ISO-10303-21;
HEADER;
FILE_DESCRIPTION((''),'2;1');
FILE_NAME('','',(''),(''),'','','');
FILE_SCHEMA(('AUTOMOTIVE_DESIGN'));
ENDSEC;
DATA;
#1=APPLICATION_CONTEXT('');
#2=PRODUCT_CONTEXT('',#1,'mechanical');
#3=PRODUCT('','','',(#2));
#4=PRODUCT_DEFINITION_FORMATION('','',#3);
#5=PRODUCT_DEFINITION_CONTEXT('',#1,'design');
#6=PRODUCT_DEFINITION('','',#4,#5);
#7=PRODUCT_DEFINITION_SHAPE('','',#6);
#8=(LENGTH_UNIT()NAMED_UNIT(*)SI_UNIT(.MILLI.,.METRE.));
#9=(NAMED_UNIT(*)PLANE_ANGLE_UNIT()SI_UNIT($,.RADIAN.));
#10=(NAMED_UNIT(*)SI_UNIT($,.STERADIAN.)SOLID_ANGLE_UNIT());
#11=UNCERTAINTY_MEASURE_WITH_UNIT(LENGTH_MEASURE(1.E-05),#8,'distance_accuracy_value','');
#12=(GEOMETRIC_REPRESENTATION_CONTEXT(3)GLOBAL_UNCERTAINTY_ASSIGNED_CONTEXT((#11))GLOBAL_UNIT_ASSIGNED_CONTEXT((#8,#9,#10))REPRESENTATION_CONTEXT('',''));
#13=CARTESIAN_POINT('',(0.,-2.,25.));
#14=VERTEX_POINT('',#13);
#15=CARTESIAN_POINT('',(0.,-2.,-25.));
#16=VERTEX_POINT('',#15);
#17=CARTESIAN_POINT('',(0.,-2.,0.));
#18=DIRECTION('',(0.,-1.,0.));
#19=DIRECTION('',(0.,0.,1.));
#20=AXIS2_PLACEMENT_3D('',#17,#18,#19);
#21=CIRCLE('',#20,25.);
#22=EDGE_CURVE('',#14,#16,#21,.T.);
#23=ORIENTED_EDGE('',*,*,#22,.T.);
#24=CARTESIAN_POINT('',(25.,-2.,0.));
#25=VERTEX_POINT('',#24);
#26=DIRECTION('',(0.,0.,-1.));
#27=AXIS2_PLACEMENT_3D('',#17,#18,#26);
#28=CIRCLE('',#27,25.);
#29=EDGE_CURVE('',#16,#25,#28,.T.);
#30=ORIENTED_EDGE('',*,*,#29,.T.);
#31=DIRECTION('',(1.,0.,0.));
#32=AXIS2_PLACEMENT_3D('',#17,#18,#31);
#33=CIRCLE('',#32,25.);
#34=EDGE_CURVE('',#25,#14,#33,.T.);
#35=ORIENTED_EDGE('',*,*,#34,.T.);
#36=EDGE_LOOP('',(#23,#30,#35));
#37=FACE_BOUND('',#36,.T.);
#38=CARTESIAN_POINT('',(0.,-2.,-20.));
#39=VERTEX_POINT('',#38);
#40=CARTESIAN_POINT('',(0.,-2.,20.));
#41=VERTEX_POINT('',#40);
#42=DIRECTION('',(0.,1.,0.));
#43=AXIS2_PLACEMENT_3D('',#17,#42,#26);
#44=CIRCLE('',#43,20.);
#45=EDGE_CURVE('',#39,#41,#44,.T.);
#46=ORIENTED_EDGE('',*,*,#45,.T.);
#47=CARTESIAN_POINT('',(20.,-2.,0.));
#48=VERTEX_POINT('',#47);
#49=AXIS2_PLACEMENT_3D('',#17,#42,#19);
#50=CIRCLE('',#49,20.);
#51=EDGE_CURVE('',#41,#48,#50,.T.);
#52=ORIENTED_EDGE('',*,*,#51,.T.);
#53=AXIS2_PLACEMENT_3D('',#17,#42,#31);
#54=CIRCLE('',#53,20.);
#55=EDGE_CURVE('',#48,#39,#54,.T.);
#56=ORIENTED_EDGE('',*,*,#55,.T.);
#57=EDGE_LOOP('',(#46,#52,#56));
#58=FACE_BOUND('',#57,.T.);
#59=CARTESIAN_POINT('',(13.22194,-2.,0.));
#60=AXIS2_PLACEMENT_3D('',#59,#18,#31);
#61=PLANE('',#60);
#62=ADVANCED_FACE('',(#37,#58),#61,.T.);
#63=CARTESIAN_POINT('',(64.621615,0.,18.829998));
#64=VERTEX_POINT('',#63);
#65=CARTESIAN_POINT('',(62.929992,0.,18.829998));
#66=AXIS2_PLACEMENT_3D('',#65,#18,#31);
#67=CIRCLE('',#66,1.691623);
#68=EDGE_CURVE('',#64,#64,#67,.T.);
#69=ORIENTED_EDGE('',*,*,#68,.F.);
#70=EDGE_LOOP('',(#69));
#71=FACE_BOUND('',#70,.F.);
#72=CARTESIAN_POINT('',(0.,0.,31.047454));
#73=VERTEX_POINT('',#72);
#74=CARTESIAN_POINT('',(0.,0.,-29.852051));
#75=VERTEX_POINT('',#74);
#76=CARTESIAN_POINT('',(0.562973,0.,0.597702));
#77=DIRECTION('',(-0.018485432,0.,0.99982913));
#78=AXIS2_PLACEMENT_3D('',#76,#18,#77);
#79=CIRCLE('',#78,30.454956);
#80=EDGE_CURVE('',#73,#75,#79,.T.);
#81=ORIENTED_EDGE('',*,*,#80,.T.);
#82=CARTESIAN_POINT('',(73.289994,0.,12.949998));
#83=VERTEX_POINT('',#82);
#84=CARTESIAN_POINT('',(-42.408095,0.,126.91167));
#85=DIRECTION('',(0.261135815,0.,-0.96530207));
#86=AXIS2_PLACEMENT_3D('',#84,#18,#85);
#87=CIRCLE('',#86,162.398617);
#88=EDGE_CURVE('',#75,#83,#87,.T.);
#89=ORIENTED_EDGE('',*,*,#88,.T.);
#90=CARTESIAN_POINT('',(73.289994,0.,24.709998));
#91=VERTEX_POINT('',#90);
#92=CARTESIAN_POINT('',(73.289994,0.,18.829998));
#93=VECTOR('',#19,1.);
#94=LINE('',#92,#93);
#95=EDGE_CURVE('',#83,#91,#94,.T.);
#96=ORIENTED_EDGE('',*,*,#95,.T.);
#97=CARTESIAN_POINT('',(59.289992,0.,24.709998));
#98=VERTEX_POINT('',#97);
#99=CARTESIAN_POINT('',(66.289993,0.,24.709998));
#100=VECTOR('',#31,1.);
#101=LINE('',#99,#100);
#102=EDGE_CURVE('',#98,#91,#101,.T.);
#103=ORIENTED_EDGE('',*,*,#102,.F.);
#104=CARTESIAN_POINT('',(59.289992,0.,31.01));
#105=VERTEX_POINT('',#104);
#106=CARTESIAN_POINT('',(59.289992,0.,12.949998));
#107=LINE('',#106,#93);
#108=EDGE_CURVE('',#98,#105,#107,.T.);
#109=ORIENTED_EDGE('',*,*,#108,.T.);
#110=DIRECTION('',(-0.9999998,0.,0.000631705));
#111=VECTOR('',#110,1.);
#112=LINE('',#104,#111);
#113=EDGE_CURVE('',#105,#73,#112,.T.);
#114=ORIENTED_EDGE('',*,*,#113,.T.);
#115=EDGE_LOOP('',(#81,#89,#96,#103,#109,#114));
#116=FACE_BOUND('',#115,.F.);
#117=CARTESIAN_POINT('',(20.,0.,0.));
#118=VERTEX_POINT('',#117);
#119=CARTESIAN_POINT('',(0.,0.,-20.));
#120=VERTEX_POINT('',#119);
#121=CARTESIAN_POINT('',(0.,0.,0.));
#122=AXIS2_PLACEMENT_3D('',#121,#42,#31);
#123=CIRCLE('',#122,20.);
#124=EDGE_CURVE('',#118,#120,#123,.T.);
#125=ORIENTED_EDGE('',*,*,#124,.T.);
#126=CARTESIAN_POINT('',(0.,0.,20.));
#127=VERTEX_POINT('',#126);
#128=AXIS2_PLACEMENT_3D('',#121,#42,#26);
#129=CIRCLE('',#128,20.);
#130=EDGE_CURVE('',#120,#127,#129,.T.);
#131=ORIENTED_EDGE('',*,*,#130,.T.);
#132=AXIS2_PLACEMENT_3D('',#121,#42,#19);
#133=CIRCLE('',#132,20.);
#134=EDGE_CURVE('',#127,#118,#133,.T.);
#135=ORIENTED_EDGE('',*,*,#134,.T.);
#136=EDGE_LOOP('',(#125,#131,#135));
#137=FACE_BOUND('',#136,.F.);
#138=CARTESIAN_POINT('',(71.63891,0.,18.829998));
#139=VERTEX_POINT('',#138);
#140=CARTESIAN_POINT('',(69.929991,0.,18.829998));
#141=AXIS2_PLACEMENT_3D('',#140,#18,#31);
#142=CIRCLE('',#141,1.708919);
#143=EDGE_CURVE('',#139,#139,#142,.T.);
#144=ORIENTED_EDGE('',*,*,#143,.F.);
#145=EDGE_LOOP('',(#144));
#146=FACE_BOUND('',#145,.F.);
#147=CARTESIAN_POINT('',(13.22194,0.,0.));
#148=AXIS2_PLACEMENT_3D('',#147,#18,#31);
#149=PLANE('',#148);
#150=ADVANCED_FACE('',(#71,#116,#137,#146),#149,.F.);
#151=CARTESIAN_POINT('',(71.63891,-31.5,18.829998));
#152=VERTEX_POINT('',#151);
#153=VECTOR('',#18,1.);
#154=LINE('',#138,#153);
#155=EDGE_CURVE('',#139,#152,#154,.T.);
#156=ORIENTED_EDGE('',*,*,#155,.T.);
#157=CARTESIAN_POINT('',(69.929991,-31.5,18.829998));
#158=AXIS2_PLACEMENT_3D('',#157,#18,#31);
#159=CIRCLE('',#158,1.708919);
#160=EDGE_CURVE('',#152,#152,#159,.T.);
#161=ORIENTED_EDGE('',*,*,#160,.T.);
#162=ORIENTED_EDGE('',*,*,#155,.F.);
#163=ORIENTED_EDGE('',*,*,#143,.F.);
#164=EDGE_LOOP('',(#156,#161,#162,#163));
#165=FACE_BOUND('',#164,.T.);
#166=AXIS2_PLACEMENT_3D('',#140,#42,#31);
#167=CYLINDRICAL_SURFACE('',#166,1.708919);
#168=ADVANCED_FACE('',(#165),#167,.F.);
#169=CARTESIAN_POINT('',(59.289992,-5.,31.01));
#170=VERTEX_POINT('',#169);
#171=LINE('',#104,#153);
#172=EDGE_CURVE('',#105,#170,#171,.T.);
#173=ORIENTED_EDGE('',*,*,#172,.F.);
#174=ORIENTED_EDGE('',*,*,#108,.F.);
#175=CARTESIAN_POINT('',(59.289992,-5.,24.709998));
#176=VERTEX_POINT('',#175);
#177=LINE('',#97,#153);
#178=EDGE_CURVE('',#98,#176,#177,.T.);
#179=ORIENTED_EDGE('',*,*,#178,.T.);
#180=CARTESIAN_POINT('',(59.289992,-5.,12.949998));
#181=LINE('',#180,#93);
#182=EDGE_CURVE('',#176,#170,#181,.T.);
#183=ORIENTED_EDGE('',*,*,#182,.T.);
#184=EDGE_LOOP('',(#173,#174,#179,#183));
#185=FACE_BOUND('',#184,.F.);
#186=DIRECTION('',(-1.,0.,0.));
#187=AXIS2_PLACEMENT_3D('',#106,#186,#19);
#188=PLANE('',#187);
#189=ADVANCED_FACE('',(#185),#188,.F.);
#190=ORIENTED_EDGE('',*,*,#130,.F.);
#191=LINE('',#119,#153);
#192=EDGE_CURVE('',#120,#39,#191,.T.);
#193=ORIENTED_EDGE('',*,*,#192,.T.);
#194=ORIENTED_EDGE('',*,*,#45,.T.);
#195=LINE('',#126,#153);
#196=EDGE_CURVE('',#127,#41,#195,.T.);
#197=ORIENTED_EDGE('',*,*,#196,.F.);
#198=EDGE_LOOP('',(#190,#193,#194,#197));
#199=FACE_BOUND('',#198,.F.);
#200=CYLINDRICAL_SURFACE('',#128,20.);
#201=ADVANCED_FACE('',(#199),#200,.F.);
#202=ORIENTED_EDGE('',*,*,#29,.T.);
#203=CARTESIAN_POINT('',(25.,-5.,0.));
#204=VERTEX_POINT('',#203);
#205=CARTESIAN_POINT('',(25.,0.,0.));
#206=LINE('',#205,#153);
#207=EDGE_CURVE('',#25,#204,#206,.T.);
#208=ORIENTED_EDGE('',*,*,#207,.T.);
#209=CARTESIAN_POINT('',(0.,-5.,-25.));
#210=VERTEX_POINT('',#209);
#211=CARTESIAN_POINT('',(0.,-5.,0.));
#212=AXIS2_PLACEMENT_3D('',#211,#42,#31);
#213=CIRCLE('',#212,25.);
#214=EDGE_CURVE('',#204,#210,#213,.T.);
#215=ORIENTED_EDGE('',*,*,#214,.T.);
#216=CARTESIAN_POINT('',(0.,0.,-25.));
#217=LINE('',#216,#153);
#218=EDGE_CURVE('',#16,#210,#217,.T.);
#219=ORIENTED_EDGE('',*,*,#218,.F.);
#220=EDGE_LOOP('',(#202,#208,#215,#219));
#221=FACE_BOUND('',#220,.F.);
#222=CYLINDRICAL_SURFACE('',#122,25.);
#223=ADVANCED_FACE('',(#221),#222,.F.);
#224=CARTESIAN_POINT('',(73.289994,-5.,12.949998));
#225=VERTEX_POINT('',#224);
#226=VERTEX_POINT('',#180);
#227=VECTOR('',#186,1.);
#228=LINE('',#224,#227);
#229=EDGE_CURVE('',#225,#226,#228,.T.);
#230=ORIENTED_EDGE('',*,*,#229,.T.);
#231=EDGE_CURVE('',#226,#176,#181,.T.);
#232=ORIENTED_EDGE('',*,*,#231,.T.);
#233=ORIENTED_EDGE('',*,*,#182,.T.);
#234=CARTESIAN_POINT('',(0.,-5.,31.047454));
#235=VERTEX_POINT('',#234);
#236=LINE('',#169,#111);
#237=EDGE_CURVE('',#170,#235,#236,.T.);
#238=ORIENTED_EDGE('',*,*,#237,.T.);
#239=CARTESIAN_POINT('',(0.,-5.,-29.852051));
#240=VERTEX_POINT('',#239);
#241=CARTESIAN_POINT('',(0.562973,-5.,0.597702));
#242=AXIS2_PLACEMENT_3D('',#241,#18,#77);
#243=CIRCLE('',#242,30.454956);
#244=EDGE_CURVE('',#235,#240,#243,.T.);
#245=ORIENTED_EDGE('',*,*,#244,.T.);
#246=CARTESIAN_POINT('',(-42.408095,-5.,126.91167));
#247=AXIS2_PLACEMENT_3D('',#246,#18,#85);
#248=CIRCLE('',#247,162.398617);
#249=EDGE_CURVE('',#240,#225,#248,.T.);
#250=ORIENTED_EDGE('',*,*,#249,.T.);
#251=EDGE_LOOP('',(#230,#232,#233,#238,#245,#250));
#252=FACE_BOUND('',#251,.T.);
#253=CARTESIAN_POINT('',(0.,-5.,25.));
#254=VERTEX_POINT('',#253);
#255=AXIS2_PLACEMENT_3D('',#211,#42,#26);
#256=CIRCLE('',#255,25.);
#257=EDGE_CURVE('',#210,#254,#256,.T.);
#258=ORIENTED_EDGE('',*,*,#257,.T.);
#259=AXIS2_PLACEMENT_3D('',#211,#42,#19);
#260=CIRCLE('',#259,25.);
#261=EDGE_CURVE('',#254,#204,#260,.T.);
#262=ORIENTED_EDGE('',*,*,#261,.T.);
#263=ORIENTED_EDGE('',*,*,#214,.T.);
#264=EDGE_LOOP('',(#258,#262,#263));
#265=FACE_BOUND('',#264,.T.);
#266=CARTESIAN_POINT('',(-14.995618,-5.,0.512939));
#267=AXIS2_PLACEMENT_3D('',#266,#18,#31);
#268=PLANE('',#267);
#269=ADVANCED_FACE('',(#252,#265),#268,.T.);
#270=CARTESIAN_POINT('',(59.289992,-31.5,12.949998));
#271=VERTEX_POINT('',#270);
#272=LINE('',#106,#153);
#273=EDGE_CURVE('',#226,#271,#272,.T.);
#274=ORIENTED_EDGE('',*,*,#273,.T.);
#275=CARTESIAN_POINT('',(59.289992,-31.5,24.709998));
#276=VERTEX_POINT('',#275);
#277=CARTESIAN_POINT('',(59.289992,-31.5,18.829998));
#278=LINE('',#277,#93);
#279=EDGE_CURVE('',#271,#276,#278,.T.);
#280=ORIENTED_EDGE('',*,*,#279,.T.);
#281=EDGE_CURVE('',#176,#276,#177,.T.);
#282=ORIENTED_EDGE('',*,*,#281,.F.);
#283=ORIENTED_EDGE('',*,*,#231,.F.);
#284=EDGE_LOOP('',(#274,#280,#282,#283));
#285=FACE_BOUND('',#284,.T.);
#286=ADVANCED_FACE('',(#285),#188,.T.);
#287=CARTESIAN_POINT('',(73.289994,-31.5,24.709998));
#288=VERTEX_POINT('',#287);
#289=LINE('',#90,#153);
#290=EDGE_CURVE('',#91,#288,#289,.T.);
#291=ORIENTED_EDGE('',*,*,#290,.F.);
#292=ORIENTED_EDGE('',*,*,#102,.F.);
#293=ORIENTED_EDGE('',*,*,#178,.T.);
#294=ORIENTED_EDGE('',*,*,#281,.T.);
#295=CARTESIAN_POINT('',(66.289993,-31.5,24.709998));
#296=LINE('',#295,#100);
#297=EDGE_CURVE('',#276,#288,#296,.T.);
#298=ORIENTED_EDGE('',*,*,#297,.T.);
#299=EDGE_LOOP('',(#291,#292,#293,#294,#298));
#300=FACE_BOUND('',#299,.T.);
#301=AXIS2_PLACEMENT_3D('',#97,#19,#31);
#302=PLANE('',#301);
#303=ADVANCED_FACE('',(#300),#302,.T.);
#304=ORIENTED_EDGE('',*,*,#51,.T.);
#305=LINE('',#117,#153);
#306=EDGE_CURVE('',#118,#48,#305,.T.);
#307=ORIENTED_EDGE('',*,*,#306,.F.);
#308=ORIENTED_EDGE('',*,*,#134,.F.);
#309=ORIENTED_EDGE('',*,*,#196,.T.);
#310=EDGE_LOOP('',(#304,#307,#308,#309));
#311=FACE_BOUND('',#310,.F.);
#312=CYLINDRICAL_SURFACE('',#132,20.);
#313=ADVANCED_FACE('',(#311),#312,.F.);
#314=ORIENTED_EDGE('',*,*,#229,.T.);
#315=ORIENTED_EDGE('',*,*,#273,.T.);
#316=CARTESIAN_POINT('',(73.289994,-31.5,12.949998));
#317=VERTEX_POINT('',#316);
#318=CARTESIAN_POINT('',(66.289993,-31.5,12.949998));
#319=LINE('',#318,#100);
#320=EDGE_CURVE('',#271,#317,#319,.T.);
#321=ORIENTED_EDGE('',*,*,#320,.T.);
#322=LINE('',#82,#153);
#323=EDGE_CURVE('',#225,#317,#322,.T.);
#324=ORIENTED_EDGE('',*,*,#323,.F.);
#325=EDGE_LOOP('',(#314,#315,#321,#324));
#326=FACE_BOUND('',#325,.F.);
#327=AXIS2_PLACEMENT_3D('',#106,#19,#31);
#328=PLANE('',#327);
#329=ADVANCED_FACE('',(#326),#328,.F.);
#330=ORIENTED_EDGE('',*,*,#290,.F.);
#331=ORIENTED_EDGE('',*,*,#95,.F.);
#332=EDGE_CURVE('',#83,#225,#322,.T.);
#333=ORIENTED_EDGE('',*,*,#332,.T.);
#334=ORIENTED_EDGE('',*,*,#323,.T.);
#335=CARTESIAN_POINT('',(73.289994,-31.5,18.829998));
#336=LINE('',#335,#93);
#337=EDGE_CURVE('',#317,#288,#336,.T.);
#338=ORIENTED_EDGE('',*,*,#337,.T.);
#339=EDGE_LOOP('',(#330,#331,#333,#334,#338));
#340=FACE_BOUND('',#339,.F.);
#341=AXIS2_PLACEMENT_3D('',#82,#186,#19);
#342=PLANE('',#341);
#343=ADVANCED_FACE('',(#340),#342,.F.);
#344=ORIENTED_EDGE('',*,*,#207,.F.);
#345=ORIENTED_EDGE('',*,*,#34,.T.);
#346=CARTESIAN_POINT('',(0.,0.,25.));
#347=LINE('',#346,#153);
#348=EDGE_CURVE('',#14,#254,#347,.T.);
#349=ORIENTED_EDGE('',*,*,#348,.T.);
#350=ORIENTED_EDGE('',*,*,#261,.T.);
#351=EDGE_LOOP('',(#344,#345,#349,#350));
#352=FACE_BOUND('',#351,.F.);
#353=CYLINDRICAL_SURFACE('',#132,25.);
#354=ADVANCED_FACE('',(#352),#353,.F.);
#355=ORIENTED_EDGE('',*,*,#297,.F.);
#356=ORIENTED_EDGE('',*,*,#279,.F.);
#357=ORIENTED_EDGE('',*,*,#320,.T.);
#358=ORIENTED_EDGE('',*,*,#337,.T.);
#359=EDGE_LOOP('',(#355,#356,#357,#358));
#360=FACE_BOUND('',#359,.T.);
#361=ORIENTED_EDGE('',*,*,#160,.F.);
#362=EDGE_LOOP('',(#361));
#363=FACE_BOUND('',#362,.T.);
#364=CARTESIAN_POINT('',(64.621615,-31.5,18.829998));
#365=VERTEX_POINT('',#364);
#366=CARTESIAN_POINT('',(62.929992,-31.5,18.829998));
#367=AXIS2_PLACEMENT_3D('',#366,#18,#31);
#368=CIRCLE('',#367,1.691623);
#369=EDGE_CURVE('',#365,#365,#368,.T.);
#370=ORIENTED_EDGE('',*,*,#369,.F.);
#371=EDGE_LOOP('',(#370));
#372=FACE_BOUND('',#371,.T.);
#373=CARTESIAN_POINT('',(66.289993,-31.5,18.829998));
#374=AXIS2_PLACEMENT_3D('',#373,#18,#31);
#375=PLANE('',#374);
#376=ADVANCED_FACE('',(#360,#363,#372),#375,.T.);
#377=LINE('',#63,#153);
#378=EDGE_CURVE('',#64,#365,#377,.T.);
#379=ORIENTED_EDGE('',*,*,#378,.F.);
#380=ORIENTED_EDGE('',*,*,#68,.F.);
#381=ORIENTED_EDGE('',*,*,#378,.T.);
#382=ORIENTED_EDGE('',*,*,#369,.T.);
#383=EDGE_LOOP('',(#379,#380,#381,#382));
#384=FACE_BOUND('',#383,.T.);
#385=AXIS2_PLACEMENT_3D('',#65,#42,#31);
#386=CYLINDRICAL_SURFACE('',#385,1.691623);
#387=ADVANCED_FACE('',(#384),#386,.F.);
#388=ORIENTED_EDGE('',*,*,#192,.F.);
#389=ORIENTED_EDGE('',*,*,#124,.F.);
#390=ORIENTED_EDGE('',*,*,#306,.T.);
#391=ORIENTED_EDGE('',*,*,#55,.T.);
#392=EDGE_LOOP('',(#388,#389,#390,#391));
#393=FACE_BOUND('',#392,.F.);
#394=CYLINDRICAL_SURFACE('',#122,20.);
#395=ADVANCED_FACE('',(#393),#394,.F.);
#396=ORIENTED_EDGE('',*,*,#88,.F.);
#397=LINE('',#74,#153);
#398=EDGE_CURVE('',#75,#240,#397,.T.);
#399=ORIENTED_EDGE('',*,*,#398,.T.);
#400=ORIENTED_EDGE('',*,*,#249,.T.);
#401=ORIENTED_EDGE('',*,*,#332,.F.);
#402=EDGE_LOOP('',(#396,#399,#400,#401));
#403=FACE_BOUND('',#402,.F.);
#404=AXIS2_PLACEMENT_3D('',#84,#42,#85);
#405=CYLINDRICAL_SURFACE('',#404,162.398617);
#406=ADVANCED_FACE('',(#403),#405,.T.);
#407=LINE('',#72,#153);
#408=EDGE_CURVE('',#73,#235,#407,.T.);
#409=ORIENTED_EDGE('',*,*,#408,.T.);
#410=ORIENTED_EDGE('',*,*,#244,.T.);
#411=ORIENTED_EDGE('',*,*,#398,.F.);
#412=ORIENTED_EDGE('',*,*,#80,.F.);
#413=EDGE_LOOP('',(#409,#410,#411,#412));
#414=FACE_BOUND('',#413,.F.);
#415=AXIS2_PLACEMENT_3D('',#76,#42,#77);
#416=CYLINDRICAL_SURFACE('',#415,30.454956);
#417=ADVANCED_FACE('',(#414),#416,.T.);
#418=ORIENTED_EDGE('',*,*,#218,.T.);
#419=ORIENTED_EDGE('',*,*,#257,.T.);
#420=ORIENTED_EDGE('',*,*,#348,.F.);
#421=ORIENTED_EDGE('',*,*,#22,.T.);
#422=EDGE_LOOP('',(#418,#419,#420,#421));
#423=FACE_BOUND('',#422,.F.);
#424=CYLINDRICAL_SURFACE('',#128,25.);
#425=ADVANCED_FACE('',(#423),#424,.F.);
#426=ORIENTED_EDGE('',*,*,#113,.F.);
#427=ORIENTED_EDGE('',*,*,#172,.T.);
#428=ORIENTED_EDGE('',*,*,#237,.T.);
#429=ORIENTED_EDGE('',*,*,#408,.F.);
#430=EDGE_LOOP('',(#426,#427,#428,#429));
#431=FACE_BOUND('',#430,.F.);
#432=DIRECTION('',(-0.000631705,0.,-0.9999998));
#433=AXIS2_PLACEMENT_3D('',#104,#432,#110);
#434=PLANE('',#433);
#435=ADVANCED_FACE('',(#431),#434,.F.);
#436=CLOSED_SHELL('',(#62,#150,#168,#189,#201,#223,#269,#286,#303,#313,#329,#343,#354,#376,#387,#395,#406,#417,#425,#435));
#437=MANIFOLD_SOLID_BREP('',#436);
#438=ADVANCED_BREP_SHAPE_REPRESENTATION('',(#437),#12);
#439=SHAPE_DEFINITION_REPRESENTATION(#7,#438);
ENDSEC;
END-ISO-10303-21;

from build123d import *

# Parameters (mm, degrees)
F1_DEPTH = 5
F0_W     = 14.0000022948
F0_H     = 11.7600001395
F0_R     = 1.6916232852
F0_R_2   = 1.7089194305
F7_DEPTH = 31.5
F8_DEPTH = 2


# Not quite as in the source:
# - the program builds the solid bodies; features that only make, move or delete a surface that nothing else refers to are left out


with BuildPart() as f1:
    # F0 (on Front) → F1 (new body)
    with BuildSketch(Plane.XZ):
        with BuildLine():
            ThreePointArc((0, -25), (-25, 0), (0, 25))
            Line((0, 25), (0, 31.0474538393))
            ThreePointArc((0, 31.0474538393), (-29.8919830792, 0.5977015918), (0, -29.8520506557))
            Line((0, -29.8520506557), (0, -25))
        make_face()
        with BuildLine():
            ThreePointArc((0, 25), (17.6776695297, 17.6776695297), (25, 0))
            ThreePointArc((25, 0), (17.6776695297, -17.6776695297), (0, -25))
            Line((0, -25), (0, -29.8520506557))
            ThreePointArc((0, -29.8520506557), (39.4905936266, -13.3235446474), (73.2899941504, 12.9499975592))
            Line((73.2899941504, 12.9499975592), (59.2899918556, 12.9499975592))
            Line((59.2899918556, 12.9499975592), (59.2899918556, 24.7099976987))
            Line((59.2899918556, 24.7099976987), (59.2899918556, 31.0100000352))
            Line((59.2899918556, 31.0100000352), (0, 31.0474538393))
            Line((0, 31.0474538393), (0, 25))
        make_face()
    extrude(amount=F1_DEPTH)

    # F0 (on Front) → F7 (join)
    with BuildSketch(Plane.XZ):
        with Locations((66.289993003, 18.8299976289)):
            Rectangle(F0_W, F0_H)
        with Locations((62.9299916327, 18.8299976289)):
            Circle(F0_R, mode=Mode.SUBTRACT)
        with Locations((69.9299909174, 18.8299976289)):
            Circle(F0_R_2, mode=Mode.SUBTRACT)
    extrude(amount=F7_DEPTH)

    # F0 (on Front) → F8 (join)
    with BuildSketch(Plane.XZ):
        with BuildLine():
            ThreePointArc((0, -25), (17.6776695297, -17.6776695297), (25, 0))
            ThreePointArc((25, 0), (17.6776695297, 17.6776695297), (0, 25))
            Line((0, 25), (0, 20))
            ThreePointArc((0, 20), (14.1421356237, 14.1421356237), (20, 0))
            ThreePointArc((20, 0), (14.1421356237, -14.1421356237), (0, -20))
            Line((0, -20), (0, -25))
        make_face()
        with BuildLine():
            Line((0, 20), (0, 25))
            ThreePointArc((0, 25), (-25, 0), (0, -25))
            Line((0, -25), (0, -20))
            ThreePointArc((0, -20), (-20, 0), (0, 20))
        make_face()
    extrude(amount=F8_DEPTH)


solid = f1.part
